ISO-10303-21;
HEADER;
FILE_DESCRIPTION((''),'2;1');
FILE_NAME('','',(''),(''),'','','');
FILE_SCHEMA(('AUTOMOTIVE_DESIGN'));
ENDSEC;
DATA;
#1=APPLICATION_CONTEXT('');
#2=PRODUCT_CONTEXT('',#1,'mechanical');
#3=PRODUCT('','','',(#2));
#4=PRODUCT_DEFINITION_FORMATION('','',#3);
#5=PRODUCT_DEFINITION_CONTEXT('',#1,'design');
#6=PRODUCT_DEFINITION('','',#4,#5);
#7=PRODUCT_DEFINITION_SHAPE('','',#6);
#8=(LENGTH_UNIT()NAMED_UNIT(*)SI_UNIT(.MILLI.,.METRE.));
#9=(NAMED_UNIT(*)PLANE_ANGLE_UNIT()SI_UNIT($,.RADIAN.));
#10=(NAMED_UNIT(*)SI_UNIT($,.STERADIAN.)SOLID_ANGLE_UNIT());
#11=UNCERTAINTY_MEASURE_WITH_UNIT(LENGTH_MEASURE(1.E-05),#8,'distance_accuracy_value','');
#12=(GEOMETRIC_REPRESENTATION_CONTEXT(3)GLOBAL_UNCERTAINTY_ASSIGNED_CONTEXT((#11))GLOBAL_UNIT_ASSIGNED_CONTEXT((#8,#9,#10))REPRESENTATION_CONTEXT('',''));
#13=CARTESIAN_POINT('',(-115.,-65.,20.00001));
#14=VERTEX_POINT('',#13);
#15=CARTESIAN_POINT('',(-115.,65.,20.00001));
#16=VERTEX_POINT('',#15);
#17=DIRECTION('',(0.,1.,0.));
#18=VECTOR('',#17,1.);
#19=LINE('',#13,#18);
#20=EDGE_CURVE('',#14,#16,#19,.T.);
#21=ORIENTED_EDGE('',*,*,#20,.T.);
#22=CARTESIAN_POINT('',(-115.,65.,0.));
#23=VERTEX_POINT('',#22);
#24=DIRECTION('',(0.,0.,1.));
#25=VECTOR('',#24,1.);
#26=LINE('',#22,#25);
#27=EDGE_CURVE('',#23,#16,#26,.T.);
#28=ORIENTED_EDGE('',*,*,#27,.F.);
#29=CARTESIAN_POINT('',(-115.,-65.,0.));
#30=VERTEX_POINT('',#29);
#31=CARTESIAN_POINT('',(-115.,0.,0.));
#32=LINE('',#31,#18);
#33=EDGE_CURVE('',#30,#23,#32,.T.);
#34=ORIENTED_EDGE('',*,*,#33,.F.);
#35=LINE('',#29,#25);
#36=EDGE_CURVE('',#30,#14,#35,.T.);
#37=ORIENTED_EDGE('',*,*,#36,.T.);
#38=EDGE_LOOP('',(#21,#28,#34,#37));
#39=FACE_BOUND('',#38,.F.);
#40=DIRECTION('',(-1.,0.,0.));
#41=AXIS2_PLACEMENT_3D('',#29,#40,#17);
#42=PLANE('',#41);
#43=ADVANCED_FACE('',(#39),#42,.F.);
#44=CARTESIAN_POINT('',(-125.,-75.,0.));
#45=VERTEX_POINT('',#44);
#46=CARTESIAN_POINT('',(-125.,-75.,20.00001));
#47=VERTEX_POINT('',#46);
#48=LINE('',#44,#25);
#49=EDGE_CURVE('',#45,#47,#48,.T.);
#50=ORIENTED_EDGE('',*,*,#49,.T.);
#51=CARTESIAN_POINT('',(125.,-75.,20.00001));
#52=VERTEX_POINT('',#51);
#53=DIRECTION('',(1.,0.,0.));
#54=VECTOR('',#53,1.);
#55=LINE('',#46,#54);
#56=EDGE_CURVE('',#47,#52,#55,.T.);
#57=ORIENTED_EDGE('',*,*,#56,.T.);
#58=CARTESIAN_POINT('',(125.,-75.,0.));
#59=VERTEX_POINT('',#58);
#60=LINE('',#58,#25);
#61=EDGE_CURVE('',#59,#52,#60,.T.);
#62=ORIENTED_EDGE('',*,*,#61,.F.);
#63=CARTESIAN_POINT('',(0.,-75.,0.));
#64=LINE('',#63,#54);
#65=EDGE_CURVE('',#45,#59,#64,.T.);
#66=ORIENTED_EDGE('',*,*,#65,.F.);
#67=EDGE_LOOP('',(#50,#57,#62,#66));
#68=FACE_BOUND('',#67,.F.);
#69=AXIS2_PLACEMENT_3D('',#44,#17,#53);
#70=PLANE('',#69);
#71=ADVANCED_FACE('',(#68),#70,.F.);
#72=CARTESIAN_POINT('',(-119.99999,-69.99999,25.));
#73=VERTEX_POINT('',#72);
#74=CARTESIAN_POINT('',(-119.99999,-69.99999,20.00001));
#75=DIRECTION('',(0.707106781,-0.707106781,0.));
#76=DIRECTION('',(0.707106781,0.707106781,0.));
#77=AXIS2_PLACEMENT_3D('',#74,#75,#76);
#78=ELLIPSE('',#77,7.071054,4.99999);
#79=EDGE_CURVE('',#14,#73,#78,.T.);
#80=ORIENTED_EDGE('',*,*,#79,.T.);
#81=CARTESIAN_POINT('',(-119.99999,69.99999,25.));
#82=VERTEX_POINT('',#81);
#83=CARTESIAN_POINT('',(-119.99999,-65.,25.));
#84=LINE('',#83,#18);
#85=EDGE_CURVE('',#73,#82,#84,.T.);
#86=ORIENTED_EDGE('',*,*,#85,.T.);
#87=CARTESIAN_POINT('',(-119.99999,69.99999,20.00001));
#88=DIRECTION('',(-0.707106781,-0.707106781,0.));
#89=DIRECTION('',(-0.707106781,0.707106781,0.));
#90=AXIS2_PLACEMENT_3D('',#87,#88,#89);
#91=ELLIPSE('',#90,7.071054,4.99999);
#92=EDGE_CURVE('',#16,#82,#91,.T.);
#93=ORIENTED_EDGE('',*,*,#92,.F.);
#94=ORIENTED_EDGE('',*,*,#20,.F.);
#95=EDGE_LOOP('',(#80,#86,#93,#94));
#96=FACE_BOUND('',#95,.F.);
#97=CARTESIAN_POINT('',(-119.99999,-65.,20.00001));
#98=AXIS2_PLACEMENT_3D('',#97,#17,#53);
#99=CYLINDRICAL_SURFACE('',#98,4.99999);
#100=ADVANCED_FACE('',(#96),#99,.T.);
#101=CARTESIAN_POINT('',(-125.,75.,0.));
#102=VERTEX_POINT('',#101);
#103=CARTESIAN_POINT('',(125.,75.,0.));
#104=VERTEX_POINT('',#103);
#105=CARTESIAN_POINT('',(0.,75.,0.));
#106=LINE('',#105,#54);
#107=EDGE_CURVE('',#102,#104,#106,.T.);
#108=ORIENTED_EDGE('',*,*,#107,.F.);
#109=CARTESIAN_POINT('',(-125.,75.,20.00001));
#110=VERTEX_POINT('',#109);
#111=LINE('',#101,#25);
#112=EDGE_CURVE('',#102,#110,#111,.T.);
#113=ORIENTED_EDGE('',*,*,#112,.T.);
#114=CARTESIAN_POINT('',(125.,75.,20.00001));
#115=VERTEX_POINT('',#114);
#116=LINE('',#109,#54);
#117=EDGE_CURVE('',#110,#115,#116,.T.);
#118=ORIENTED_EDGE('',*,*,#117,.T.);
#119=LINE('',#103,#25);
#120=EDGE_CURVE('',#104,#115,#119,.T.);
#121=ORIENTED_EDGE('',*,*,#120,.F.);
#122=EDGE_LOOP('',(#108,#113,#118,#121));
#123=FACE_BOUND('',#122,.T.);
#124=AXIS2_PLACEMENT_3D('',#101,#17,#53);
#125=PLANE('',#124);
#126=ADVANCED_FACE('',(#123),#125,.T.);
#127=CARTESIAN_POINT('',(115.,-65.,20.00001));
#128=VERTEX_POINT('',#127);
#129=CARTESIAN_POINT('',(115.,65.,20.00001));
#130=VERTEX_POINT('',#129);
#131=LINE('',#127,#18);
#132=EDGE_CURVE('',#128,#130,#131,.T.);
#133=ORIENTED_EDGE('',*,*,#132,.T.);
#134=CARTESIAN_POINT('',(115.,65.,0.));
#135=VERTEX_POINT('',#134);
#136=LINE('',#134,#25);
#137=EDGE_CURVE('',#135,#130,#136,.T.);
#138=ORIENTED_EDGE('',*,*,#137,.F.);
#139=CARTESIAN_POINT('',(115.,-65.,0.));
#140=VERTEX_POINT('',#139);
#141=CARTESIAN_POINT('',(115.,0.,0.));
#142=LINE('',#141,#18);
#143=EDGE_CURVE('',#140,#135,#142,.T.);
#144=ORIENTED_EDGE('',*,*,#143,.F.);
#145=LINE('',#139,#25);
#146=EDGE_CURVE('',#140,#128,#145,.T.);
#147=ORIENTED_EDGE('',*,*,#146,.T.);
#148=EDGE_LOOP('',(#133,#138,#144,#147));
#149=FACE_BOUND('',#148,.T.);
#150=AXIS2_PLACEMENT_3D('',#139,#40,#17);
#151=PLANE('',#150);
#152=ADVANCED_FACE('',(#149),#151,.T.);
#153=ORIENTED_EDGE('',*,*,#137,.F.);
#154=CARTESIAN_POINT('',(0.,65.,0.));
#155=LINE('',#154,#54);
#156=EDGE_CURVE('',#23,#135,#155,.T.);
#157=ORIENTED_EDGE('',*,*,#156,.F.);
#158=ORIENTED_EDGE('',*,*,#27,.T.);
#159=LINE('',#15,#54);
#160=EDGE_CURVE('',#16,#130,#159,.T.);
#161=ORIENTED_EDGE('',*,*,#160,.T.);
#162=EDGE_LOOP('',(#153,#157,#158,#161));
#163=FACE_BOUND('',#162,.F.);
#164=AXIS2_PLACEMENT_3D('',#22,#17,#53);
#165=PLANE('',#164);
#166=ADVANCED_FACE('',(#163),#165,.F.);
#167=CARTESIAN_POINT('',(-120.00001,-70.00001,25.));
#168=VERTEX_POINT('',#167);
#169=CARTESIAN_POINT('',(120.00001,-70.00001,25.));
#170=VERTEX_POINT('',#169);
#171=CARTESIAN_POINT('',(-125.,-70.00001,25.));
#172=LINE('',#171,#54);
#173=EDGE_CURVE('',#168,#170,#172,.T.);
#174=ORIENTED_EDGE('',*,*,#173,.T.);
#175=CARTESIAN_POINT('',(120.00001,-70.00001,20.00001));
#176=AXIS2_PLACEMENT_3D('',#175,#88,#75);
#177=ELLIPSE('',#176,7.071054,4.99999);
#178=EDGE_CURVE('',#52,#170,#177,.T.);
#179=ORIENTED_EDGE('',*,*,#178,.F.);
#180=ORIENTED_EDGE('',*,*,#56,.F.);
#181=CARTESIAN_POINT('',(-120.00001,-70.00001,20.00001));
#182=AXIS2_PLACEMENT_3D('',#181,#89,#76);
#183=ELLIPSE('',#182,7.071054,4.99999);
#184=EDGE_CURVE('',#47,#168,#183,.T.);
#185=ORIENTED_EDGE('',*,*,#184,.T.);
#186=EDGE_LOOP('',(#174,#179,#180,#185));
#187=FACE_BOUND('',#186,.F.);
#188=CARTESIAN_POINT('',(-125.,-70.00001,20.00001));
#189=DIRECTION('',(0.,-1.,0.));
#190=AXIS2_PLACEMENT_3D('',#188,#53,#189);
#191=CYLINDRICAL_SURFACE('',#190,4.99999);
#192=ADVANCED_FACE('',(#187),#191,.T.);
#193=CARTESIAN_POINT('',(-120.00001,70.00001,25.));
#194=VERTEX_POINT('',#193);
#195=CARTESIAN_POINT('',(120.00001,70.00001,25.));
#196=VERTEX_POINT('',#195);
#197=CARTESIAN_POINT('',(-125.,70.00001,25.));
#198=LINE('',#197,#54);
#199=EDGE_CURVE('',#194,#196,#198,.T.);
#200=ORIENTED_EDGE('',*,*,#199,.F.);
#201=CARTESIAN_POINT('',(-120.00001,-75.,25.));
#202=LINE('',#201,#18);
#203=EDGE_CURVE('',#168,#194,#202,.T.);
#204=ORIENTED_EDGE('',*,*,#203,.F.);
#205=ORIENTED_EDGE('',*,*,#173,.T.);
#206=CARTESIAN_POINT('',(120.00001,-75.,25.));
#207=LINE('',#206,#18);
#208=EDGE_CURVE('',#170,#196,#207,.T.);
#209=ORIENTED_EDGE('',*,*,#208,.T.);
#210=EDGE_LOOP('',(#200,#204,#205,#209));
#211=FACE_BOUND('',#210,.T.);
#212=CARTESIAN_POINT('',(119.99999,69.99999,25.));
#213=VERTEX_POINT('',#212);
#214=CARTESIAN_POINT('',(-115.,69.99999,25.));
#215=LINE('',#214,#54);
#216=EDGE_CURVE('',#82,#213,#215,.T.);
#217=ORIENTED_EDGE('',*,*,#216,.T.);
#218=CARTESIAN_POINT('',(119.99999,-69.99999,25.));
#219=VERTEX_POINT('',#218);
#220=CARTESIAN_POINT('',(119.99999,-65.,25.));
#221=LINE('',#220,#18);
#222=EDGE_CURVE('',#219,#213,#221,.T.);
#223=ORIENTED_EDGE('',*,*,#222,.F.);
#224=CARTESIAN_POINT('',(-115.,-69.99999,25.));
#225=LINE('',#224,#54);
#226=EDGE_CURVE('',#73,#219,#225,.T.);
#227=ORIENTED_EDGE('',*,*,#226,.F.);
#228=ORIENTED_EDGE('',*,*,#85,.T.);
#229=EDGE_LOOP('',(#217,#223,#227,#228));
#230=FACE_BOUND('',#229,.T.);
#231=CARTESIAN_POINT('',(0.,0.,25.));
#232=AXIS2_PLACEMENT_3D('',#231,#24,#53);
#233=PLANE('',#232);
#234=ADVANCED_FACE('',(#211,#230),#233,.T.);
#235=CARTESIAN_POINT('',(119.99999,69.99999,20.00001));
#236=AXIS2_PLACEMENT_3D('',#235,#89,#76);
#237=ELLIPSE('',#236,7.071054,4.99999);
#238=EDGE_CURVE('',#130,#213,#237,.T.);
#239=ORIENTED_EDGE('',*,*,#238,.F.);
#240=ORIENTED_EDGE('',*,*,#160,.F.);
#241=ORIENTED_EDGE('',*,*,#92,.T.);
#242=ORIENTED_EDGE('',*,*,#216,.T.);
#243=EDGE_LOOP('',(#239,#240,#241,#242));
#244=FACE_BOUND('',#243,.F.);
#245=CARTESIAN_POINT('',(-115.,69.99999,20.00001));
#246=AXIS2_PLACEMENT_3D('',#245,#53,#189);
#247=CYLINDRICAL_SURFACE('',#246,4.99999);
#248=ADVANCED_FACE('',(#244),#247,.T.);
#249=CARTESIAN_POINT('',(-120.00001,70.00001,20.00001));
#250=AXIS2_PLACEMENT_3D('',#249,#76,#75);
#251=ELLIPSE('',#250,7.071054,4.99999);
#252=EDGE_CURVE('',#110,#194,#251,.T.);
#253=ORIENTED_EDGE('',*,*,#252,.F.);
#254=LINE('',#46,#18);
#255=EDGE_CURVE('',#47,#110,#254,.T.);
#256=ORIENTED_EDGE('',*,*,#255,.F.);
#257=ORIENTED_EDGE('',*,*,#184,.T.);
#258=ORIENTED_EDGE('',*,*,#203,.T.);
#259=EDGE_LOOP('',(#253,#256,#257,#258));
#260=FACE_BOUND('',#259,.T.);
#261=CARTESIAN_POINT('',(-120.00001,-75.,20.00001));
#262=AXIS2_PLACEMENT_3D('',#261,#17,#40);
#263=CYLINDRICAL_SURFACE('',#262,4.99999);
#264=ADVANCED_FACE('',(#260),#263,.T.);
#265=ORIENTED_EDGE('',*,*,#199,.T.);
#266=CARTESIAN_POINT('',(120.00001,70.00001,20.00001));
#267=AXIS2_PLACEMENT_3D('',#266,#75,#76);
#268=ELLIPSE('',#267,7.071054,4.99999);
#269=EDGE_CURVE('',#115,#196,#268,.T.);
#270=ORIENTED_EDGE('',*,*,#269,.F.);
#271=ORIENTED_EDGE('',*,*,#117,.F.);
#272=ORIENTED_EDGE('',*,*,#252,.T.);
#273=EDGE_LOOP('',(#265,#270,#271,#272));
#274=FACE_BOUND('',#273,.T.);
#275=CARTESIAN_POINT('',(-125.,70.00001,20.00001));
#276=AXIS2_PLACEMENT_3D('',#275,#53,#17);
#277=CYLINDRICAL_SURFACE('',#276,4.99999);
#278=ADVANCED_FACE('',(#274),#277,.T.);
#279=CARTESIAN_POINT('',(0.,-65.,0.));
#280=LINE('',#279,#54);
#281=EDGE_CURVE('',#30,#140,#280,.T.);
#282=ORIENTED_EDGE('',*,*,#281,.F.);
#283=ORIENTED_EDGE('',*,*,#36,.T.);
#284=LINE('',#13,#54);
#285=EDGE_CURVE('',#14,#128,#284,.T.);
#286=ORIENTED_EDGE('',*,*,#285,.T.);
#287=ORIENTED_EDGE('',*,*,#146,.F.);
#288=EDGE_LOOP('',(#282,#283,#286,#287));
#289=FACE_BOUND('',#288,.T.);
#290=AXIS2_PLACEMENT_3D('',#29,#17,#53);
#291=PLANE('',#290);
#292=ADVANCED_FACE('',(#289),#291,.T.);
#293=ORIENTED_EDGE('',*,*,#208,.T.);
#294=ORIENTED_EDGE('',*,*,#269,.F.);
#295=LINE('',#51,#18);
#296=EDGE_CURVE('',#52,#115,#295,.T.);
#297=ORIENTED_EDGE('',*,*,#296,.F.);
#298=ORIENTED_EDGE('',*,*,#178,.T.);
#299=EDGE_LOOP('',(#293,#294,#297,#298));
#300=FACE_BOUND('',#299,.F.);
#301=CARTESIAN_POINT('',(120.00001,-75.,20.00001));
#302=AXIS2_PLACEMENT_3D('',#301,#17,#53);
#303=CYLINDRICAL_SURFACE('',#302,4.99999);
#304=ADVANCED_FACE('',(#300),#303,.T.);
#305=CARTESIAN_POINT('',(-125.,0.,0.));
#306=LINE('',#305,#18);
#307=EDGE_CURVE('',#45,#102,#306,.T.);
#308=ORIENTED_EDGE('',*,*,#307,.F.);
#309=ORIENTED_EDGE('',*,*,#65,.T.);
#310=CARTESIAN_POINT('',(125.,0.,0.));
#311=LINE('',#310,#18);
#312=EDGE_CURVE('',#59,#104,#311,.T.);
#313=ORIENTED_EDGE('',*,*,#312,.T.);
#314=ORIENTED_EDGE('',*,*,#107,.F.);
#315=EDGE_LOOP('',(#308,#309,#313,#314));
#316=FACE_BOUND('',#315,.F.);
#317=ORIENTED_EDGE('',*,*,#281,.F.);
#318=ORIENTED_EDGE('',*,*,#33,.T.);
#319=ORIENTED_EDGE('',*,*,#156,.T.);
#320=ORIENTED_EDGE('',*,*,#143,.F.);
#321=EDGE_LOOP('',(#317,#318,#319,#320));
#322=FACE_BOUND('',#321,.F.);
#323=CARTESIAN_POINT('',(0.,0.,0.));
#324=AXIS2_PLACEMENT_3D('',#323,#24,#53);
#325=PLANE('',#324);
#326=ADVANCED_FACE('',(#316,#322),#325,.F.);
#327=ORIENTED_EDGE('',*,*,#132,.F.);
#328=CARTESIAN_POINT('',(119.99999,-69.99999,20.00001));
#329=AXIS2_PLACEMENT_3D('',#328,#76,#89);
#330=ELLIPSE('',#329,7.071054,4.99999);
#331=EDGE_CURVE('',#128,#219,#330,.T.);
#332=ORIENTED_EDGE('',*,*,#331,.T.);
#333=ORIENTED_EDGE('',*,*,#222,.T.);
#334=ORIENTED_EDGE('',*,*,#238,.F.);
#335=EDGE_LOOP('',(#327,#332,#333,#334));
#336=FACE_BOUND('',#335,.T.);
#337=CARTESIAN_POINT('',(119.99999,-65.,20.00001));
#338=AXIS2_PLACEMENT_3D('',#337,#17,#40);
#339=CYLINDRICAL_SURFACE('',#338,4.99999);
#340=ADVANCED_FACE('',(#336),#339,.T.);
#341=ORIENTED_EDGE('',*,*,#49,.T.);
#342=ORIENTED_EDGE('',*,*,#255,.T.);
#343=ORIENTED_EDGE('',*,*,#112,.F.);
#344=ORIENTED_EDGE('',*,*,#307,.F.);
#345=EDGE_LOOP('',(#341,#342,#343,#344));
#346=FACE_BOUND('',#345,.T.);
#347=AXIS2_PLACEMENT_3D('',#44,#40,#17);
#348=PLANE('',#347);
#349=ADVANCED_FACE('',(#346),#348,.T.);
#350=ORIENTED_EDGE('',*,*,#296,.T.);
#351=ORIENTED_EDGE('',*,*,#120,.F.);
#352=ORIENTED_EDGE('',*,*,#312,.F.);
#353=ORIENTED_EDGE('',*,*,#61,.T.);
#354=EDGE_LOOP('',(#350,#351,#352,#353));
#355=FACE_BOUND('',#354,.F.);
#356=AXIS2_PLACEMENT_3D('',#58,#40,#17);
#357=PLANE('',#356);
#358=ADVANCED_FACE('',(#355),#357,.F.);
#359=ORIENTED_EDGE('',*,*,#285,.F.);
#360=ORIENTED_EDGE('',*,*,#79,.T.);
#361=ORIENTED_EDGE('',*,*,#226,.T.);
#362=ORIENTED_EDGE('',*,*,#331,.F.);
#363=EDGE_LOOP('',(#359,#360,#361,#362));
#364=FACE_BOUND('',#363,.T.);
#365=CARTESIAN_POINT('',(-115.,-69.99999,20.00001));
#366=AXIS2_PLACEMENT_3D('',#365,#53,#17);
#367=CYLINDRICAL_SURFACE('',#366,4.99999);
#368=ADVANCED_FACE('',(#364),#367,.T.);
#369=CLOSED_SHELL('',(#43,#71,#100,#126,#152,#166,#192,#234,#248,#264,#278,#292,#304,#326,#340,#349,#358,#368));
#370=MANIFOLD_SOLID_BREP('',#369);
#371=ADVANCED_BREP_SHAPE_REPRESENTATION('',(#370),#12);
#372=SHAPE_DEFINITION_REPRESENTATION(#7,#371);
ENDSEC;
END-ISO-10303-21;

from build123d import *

# Parameters (mm, degrees)
F0_W     = 250
F0_H     = 150
F0_W_2   = 230
F0_H_2   = 130
F1_DEPTH = 25
F2_R     = 4.99999


# Not quite as in the source:
# - a fillet or chamfer is up to 0.001 mm smaller than in the source, because OpenCascade refuses the exact size


with BuildPart() as f1:
    # F0 (on Top) → F1 (new body)
    with BuildSketch(Plane.XY):
        Rectangle(F0_W, F0_H)
        Rectangle(F0_W_2, F0_H_2, mode=Mode.SUBTRACT)
    extrude(amount=F1_DEPTH)

    # F2 (radius 5 in the source; OpenCascade refuses exactly that, so slightly less here)
    f2_edges = [f1.edges().sort_by_distance(p)[0] for p in [
        (0, 75, 25),
        (-125, 0, 25),
        (0, -75, 25),
        (125, 0, 25),
        (-115, 0, 25),
        (0, 65, 25),
        (115, 0, 25),
        (0, -65, 25),
    ]]
    fillet(f2_edges, radius=F2_R)


solid = f1.part
